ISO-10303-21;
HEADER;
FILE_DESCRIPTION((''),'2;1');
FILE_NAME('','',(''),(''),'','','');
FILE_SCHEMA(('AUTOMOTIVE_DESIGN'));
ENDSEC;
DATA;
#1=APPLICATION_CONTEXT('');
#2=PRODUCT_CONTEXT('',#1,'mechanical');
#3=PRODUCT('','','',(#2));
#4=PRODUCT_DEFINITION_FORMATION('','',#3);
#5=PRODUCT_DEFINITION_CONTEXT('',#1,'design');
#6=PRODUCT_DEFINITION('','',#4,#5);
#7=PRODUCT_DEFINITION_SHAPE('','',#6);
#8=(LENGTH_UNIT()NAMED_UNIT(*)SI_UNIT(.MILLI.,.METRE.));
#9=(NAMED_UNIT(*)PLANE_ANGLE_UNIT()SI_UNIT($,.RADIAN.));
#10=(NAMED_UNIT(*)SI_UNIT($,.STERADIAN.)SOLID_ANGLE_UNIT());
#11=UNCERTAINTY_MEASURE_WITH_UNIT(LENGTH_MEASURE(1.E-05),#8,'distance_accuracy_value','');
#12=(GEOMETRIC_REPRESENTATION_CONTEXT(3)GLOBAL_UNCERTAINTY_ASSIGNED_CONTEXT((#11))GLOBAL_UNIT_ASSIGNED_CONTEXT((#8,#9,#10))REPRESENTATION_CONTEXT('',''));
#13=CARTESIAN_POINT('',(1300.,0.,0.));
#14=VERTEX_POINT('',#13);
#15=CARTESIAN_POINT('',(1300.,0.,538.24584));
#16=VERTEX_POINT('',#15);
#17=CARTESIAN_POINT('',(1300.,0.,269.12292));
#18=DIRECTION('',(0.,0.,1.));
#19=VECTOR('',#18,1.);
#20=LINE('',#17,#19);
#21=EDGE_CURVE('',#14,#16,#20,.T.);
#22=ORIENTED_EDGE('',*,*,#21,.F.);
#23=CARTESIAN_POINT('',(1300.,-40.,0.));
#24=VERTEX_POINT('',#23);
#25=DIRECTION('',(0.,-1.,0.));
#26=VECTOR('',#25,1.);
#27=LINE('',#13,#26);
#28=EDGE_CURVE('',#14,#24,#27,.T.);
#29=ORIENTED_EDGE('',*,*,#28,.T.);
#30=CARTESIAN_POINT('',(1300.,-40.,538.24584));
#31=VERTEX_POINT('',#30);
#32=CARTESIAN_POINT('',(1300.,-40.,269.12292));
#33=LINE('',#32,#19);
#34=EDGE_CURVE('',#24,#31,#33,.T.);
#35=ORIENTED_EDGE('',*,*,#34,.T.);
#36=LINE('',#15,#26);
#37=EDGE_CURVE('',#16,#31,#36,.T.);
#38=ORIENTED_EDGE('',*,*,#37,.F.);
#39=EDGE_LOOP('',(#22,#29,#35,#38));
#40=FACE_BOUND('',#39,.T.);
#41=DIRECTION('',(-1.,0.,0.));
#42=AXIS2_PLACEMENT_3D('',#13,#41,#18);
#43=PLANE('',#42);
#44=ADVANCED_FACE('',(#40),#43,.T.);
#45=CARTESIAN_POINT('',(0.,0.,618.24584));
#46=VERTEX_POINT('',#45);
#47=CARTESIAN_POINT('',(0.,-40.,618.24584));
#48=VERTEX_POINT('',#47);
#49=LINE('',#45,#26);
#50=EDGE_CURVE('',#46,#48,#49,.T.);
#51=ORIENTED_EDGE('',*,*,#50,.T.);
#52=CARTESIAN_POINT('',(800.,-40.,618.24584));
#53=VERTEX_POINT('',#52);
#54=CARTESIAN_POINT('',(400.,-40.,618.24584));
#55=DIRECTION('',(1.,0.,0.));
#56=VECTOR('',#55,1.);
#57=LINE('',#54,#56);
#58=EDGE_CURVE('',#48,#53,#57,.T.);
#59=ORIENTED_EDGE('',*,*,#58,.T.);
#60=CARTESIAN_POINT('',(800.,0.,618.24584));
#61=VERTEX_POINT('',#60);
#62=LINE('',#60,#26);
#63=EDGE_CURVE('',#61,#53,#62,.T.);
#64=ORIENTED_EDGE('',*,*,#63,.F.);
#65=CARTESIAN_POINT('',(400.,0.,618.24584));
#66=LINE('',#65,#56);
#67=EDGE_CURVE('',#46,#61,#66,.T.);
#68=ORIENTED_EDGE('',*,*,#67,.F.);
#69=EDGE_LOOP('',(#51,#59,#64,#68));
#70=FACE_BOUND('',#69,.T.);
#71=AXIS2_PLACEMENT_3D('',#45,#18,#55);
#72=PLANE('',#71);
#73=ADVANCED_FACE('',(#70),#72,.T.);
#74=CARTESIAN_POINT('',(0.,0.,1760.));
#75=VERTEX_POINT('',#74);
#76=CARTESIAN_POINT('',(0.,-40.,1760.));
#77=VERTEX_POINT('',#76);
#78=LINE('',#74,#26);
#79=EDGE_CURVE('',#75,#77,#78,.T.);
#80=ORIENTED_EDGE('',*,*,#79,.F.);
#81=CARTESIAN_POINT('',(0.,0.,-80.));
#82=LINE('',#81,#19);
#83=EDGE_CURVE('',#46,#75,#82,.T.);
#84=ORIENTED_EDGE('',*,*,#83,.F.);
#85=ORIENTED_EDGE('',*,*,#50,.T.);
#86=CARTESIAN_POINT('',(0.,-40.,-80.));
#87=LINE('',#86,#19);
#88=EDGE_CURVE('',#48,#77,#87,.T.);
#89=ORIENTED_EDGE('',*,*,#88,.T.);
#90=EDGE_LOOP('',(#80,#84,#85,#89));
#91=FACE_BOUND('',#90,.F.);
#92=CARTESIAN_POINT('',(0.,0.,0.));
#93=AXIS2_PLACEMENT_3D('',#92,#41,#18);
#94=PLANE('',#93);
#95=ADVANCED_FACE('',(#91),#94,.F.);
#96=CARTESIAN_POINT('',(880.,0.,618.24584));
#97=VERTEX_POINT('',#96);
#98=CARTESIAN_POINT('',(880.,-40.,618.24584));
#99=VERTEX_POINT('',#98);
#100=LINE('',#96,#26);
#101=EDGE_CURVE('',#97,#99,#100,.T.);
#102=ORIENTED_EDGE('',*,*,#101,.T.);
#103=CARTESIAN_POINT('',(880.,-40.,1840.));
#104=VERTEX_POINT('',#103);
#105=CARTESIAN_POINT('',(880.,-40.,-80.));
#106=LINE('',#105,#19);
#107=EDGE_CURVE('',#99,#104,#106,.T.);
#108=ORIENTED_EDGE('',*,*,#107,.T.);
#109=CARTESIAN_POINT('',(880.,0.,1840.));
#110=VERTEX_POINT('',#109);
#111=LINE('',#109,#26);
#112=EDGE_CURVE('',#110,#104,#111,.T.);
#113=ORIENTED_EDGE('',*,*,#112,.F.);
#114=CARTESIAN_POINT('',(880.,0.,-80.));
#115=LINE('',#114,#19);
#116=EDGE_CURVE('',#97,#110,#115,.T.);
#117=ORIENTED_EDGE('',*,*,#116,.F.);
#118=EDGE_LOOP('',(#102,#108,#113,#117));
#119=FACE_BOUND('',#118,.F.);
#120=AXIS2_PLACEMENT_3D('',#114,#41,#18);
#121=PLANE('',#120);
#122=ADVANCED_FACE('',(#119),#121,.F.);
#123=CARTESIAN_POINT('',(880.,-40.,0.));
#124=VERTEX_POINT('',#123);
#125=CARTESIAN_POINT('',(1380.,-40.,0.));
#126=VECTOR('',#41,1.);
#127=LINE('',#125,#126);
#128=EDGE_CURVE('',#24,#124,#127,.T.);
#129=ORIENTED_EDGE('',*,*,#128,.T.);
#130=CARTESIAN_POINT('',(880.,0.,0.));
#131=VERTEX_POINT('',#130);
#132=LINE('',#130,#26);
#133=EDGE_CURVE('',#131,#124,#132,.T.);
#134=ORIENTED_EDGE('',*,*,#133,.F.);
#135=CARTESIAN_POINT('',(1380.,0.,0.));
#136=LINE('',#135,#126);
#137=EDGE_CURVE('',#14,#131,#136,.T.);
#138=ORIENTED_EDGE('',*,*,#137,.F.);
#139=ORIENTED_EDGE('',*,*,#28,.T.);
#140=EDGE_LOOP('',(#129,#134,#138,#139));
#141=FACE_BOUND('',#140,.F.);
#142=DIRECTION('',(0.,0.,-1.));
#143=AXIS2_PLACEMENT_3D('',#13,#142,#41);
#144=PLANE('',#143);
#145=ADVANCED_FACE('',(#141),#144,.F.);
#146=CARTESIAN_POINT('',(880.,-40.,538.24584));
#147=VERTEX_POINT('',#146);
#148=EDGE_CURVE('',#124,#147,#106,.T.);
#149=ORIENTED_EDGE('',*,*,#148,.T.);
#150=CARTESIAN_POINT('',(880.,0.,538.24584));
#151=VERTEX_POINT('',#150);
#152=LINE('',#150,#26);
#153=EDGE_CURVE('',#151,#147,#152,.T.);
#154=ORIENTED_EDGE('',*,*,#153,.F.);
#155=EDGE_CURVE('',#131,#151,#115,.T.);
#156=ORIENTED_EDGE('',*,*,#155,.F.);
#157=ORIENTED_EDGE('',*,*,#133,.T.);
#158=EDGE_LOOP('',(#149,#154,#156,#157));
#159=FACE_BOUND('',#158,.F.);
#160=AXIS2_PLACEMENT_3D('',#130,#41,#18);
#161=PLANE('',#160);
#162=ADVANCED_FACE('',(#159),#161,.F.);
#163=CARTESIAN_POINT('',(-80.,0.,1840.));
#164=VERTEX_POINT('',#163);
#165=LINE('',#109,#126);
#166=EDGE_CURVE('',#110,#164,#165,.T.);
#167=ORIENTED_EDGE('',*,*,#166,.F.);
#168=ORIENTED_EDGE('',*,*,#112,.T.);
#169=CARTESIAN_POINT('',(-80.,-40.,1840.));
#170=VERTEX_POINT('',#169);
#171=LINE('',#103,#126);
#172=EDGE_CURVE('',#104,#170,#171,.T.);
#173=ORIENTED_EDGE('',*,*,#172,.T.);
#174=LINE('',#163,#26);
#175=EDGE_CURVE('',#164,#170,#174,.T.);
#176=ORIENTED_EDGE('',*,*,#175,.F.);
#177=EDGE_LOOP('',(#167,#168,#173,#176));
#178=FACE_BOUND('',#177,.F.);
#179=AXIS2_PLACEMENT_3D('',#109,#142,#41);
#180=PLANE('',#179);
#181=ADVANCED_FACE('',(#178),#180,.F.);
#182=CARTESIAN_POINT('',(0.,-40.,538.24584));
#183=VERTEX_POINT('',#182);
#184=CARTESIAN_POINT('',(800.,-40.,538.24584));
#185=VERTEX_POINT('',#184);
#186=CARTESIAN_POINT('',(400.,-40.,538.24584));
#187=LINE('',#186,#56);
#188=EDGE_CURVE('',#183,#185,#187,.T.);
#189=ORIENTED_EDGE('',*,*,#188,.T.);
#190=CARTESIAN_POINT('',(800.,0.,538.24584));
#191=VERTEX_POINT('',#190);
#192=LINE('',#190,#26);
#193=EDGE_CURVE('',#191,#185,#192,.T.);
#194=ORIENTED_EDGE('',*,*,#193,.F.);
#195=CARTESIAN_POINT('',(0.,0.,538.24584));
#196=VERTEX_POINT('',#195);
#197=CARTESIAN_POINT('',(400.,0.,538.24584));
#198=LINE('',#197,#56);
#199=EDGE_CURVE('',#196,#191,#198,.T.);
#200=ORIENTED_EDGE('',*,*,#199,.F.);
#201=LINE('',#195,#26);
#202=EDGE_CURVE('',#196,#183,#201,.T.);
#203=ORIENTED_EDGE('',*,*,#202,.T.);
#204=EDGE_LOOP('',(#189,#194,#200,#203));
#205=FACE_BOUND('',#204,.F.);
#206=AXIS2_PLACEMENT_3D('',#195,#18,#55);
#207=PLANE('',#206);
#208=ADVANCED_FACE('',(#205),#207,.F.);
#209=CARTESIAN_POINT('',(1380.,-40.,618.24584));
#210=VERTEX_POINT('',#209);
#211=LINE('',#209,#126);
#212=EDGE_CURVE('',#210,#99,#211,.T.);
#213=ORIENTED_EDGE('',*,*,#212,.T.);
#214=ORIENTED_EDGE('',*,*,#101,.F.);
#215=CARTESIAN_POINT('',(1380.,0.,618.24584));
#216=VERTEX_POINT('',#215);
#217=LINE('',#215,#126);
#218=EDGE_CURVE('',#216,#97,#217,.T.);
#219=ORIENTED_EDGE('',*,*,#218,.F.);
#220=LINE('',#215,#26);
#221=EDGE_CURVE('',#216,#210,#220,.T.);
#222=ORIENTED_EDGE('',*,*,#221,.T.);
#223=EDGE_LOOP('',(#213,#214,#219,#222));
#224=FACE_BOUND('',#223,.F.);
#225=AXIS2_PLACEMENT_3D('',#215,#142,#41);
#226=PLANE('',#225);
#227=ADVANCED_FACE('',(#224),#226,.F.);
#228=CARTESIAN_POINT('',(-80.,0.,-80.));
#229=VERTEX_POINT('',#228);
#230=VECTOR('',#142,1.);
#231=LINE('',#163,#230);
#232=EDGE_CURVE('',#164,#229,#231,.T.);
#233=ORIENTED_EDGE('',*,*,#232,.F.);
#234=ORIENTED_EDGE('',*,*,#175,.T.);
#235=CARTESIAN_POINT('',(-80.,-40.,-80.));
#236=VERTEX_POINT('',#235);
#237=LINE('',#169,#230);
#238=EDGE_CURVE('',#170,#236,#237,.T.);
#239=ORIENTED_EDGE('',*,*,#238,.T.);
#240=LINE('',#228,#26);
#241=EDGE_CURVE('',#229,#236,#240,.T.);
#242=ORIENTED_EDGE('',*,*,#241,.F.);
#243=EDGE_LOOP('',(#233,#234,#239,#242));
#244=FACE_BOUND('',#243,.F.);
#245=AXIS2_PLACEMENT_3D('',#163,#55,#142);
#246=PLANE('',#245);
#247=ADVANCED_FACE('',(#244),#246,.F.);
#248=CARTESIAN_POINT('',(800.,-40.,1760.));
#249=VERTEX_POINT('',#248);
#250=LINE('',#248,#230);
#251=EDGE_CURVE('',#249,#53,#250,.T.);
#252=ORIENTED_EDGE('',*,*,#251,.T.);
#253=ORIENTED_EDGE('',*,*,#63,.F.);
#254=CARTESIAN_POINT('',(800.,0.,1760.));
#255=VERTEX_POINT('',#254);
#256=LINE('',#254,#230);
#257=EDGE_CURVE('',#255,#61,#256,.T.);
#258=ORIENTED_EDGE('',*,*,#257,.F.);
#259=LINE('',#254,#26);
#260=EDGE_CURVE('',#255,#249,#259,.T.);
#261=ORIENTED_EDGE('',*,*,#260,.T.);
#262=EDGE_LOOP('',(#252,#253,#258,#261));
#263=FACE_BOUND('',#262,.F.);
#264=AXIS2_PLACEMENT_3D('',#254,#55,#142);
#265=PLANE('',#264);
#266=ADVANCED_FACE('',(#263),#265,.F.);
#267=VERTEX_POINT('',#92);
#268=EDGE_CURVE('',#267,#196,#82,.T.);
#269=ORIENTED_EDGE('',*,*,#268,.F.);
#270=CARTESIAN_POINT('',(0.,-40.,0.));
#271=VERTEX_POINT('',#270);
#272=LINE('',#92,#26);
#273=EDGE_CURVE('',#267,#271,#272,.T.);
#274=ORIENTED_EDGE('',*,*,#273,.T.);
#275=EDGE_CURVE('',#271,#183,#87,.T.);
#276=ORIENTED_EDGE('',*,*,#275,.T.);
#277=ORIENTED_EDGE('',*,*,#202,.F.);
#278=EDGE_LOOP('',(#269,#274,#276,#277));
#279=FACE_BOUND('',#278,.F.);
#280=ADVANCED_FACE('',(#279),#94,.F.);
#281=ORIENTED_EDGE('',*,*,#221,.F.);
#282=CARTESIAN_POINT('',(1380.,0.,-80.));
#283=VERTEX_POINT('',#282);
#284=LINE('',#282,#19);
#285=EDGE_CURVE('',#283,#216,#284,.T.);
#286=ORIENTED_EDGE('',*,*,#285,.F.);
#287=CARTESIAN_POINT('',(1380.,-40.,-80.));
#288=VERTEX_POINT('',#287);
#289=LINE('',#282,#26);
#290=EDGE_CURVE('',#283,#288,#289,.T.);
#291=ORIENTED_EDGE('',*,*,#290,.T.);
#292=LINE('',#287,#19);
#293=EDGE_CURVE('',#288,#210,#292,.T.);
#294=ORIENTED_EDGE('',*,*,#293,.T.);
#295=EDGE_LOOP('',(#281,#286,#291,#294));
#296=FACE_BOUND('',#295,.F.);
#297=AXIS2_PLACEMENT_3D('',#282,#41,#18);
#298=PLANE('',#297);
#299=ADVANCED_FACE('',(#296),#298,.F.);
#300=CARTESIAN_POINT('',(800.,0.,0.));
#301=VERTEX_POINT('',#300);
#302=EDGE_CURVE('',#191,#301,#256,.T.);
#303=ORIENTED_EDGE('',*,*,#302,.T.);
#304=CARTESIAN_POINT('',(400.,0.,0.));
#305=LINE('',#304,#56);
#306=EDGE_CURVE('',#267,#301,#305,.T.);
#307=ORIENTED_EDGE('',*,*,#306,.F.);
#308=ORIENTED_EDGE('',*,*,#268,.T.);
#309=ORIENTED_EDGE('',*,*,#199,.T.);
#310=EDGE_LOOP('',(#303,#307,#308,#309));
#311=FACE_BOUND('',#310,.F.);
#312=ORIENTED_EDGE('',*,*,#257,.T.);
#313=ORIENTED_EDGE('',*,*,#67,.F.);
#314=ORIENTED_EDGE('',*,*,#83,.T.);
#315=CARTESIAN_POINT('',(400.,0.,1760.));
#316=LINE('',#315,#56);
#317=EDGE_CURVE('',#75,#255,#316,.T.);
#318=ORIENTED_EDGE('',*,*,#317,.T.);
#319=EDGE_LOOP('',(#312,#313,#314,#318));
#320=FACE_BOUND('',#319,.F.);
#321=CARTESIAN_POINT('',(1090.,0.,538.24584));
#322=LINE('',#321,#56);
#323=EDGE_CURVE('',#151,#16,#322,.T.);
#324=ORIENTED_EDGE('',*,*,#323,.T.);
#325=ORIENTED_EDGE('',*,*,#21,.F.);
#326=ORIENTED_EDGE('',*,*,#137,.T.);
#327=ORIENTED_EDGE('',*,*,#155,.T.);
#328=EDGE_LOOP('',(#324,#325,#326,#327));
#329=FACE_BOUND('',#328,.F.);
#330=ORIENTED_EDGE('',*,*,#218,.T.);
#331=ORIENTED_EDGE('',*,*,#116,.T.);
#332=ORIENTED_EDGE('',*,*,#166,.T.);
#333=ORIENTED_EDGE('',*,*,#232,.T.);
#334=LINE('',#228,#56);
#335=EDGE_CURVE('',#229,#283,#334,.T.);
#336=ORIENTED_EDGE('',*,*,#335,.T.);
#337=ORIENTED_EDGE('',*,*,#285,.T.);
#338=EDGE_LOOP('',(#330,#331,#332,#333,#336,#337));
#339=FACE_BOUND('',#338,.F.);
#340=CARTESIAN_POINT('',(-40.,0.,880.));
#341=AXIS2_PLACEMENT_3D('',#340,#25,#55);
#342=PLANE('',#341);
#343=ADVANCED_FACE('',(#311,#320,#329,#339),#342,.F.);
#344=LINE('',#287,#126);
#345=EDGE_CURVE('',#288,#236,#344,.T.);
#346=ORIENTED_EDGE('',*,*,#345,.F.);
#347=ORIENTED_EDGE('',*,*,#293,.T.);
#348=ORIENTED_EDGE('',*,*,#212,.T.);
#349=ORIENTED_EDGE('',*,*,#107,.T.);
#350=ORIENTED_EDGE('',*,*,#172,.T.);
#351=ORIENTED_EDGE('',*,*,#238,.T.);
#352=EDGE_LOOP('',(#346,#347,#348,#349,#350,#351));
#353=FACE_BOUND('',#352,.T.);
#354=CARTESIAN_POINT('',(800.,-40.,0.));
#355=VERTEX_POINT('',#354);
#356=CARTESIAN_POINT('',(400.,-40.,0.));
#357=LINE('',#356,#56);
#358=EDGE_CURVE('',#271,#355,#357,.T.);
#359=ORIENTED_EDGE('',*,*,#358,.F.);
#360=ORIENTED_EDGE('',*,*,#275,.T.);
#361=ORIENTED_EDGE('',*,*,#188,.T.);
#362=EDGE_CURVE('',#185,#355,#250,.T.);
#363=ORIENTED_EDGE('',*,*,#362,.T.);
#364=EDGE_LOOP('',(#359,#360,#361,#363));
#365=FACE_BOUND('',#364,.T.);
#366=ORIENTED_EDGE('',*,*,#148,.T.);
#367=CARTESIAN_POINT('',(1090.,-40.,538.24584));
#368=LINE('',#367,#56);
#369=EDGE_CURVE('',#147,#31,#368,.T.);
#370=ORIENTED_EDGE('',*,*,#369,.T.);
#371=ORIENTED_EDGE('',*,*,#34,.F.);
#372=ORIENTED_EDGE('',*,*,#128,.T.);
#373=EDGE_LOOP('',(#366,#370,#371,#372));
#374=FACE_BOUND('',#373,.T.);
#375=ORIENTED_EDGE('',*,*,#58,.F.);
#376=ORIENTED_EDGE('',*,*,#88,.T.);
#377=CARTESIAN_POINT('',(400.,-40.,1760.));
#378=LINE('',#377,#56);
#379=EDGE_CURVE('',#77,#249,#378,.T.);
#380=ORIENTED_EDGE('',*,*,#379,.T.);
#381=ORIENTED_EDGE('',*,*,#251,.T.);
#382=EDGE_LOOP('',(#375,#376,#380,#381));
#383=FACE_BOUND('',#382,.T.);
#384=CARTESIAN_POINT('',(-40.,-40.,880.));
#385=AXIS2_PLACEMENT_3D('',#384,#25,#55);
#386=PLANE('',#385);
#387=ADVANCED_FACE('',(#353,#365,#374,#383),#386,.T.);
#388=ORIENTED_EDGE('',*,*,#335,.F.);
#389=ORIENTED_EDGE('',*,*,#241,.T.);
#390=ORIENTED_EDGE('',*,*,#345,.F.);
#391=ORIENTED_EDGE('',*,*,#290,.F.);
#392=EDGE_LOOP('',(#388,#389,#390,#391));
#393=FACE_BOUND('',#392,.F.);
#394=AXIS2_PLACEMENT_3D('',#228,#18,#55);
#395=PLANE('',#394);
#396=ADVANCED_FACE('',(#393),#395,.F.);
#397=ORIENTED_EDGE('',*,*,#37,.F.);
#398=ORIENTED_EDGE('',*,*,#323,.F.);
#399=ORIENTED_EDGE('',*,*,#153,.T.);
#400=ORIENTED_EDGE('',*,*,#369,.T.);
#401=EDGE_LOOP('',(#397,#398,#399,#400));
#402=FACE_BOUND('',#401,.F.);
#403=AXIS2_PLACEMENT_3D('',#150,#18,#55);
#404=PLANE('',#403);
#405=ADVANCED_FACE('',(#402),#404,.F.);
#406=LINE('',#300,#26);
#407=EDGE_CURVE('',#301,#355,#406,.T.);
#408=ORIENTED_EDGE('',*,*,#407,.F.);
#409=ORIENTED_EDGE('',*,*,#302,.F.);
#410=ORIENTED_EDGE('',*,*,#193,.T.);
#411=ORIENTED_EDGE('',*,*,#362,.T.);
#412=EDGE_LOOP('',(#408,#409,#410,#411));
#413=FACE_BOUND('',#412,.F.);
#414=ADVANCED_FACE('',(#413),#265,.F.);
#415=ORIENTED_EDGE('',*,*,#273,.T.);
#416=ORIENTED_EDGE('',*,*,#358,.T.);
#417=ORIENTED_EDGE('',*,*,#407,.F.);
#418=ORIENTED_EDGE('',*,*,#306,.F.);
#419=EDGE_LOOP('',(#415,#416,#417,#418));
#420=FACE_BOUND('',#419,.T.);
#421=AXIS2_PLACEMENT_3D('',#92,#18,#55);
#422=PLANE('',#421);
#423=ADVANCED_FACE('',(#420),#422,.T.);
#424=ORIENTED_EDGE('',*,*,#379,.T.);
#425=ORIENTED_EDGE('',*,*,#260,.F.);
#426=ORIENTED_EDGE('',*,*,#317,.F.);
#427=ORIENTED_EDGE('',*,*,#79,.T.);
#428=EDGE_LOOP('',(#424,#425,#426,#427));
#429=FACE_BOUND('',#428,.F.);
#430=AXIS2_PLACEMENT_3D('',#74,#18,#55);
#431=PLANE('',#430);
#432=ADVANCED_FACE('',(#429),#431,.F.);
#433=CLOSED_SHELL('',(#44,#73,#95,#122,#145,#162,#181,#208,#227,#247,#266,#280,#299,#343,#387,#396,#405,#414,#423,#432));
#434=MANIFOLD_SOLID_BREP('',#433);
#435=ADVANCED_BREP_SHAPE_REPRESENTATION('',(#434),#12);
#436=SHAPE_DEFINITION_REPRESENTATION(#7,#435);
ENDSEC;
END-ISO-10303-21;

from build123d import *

# Parameters (mm, degrees)
F0_W     = 800
F0_H     = 80
F1_DEPTH = 40
F0_W_2   = 420
F0_W_3   = 80
F0_H_2   = 538.2458400726
F2_DEPTH = 40
F3_DEPTH = 40


# Not quite as in the source:
# - a feature names something its author has since deleted; it is built from what else it names


with BuildPart() as f1:
    # F0 (on Front) → F1 (new body)
    with BuildSketch(Plane.XZ):
        with Locations((400, 1800)):
            Rectangle(F0_W, F0_H)
        Polygon((-80, 1840), (-80, -80), (0, -80), (0, 0), (0, 538.2458400726), (0, 618.2458400726), (0, 1760), (0, 1840), align=None)
        with Locations((400, -40)):
            Rectangle(F0_W, F0_H)
        Polygon((800, 0), (800, -80), (880, -80), (880, 0), (880, 538.2458400726), (880, 618.2458400726), (880, 1840), (800, 1840), (800, 1760), (800, 618.2458400726), (800, 538.2458400726), align=None)
    extrude(amount=F1_DEPTH)

    # F0 (on Front) → F2 (join)
    with BuildSketch(Plane.XZ):
        Polygon((-80, 1840), (-80, -80), (0, -80), (0, 0), (0, 538.2458400726), (0, 618.2458400726), (0, 1760), (0, 1840), align=None)
        with Locations((400, -40)):
            Rectangle(F0_W, F0_H)
        with Locations((400, 1800)):
            Rectangle(F0_W, F0_H)
        Polygon((800, 0), (800, -80), (880, -80), (880, 0), (880, 538.2458400726), (880, 618.2458400726), (880, 1840), (800, 1840), (800, 1760), (800, 618.2458400726), (800, 538.2458400726), align=None)
        Polygon((880, 0), (880, -80), (1380, -80), (1380, 0), (1300, 0), align=None)
        with Locations((1090, 578.2458400726)):
            Rectangle(F0_W_2, F0_H)
        with Locations((1340, 269.1229200363)):
            Rectangle(F0_W_3, F0_H_2)
        with Locations((1340, 578.2458400726)):
            Rectangle(F0_W_3, F0_H)
    extrude(amount=F2_DEPTH)

    # F0 (on Front) → F3 (join)
    with BuildSketch(Plane.XZ):
        with Locations((400, 578.2458400726)):
            Rectangle(F0_W, F0_H)
    extrude(amount=F3_DEPTH)


solid = f1.part
